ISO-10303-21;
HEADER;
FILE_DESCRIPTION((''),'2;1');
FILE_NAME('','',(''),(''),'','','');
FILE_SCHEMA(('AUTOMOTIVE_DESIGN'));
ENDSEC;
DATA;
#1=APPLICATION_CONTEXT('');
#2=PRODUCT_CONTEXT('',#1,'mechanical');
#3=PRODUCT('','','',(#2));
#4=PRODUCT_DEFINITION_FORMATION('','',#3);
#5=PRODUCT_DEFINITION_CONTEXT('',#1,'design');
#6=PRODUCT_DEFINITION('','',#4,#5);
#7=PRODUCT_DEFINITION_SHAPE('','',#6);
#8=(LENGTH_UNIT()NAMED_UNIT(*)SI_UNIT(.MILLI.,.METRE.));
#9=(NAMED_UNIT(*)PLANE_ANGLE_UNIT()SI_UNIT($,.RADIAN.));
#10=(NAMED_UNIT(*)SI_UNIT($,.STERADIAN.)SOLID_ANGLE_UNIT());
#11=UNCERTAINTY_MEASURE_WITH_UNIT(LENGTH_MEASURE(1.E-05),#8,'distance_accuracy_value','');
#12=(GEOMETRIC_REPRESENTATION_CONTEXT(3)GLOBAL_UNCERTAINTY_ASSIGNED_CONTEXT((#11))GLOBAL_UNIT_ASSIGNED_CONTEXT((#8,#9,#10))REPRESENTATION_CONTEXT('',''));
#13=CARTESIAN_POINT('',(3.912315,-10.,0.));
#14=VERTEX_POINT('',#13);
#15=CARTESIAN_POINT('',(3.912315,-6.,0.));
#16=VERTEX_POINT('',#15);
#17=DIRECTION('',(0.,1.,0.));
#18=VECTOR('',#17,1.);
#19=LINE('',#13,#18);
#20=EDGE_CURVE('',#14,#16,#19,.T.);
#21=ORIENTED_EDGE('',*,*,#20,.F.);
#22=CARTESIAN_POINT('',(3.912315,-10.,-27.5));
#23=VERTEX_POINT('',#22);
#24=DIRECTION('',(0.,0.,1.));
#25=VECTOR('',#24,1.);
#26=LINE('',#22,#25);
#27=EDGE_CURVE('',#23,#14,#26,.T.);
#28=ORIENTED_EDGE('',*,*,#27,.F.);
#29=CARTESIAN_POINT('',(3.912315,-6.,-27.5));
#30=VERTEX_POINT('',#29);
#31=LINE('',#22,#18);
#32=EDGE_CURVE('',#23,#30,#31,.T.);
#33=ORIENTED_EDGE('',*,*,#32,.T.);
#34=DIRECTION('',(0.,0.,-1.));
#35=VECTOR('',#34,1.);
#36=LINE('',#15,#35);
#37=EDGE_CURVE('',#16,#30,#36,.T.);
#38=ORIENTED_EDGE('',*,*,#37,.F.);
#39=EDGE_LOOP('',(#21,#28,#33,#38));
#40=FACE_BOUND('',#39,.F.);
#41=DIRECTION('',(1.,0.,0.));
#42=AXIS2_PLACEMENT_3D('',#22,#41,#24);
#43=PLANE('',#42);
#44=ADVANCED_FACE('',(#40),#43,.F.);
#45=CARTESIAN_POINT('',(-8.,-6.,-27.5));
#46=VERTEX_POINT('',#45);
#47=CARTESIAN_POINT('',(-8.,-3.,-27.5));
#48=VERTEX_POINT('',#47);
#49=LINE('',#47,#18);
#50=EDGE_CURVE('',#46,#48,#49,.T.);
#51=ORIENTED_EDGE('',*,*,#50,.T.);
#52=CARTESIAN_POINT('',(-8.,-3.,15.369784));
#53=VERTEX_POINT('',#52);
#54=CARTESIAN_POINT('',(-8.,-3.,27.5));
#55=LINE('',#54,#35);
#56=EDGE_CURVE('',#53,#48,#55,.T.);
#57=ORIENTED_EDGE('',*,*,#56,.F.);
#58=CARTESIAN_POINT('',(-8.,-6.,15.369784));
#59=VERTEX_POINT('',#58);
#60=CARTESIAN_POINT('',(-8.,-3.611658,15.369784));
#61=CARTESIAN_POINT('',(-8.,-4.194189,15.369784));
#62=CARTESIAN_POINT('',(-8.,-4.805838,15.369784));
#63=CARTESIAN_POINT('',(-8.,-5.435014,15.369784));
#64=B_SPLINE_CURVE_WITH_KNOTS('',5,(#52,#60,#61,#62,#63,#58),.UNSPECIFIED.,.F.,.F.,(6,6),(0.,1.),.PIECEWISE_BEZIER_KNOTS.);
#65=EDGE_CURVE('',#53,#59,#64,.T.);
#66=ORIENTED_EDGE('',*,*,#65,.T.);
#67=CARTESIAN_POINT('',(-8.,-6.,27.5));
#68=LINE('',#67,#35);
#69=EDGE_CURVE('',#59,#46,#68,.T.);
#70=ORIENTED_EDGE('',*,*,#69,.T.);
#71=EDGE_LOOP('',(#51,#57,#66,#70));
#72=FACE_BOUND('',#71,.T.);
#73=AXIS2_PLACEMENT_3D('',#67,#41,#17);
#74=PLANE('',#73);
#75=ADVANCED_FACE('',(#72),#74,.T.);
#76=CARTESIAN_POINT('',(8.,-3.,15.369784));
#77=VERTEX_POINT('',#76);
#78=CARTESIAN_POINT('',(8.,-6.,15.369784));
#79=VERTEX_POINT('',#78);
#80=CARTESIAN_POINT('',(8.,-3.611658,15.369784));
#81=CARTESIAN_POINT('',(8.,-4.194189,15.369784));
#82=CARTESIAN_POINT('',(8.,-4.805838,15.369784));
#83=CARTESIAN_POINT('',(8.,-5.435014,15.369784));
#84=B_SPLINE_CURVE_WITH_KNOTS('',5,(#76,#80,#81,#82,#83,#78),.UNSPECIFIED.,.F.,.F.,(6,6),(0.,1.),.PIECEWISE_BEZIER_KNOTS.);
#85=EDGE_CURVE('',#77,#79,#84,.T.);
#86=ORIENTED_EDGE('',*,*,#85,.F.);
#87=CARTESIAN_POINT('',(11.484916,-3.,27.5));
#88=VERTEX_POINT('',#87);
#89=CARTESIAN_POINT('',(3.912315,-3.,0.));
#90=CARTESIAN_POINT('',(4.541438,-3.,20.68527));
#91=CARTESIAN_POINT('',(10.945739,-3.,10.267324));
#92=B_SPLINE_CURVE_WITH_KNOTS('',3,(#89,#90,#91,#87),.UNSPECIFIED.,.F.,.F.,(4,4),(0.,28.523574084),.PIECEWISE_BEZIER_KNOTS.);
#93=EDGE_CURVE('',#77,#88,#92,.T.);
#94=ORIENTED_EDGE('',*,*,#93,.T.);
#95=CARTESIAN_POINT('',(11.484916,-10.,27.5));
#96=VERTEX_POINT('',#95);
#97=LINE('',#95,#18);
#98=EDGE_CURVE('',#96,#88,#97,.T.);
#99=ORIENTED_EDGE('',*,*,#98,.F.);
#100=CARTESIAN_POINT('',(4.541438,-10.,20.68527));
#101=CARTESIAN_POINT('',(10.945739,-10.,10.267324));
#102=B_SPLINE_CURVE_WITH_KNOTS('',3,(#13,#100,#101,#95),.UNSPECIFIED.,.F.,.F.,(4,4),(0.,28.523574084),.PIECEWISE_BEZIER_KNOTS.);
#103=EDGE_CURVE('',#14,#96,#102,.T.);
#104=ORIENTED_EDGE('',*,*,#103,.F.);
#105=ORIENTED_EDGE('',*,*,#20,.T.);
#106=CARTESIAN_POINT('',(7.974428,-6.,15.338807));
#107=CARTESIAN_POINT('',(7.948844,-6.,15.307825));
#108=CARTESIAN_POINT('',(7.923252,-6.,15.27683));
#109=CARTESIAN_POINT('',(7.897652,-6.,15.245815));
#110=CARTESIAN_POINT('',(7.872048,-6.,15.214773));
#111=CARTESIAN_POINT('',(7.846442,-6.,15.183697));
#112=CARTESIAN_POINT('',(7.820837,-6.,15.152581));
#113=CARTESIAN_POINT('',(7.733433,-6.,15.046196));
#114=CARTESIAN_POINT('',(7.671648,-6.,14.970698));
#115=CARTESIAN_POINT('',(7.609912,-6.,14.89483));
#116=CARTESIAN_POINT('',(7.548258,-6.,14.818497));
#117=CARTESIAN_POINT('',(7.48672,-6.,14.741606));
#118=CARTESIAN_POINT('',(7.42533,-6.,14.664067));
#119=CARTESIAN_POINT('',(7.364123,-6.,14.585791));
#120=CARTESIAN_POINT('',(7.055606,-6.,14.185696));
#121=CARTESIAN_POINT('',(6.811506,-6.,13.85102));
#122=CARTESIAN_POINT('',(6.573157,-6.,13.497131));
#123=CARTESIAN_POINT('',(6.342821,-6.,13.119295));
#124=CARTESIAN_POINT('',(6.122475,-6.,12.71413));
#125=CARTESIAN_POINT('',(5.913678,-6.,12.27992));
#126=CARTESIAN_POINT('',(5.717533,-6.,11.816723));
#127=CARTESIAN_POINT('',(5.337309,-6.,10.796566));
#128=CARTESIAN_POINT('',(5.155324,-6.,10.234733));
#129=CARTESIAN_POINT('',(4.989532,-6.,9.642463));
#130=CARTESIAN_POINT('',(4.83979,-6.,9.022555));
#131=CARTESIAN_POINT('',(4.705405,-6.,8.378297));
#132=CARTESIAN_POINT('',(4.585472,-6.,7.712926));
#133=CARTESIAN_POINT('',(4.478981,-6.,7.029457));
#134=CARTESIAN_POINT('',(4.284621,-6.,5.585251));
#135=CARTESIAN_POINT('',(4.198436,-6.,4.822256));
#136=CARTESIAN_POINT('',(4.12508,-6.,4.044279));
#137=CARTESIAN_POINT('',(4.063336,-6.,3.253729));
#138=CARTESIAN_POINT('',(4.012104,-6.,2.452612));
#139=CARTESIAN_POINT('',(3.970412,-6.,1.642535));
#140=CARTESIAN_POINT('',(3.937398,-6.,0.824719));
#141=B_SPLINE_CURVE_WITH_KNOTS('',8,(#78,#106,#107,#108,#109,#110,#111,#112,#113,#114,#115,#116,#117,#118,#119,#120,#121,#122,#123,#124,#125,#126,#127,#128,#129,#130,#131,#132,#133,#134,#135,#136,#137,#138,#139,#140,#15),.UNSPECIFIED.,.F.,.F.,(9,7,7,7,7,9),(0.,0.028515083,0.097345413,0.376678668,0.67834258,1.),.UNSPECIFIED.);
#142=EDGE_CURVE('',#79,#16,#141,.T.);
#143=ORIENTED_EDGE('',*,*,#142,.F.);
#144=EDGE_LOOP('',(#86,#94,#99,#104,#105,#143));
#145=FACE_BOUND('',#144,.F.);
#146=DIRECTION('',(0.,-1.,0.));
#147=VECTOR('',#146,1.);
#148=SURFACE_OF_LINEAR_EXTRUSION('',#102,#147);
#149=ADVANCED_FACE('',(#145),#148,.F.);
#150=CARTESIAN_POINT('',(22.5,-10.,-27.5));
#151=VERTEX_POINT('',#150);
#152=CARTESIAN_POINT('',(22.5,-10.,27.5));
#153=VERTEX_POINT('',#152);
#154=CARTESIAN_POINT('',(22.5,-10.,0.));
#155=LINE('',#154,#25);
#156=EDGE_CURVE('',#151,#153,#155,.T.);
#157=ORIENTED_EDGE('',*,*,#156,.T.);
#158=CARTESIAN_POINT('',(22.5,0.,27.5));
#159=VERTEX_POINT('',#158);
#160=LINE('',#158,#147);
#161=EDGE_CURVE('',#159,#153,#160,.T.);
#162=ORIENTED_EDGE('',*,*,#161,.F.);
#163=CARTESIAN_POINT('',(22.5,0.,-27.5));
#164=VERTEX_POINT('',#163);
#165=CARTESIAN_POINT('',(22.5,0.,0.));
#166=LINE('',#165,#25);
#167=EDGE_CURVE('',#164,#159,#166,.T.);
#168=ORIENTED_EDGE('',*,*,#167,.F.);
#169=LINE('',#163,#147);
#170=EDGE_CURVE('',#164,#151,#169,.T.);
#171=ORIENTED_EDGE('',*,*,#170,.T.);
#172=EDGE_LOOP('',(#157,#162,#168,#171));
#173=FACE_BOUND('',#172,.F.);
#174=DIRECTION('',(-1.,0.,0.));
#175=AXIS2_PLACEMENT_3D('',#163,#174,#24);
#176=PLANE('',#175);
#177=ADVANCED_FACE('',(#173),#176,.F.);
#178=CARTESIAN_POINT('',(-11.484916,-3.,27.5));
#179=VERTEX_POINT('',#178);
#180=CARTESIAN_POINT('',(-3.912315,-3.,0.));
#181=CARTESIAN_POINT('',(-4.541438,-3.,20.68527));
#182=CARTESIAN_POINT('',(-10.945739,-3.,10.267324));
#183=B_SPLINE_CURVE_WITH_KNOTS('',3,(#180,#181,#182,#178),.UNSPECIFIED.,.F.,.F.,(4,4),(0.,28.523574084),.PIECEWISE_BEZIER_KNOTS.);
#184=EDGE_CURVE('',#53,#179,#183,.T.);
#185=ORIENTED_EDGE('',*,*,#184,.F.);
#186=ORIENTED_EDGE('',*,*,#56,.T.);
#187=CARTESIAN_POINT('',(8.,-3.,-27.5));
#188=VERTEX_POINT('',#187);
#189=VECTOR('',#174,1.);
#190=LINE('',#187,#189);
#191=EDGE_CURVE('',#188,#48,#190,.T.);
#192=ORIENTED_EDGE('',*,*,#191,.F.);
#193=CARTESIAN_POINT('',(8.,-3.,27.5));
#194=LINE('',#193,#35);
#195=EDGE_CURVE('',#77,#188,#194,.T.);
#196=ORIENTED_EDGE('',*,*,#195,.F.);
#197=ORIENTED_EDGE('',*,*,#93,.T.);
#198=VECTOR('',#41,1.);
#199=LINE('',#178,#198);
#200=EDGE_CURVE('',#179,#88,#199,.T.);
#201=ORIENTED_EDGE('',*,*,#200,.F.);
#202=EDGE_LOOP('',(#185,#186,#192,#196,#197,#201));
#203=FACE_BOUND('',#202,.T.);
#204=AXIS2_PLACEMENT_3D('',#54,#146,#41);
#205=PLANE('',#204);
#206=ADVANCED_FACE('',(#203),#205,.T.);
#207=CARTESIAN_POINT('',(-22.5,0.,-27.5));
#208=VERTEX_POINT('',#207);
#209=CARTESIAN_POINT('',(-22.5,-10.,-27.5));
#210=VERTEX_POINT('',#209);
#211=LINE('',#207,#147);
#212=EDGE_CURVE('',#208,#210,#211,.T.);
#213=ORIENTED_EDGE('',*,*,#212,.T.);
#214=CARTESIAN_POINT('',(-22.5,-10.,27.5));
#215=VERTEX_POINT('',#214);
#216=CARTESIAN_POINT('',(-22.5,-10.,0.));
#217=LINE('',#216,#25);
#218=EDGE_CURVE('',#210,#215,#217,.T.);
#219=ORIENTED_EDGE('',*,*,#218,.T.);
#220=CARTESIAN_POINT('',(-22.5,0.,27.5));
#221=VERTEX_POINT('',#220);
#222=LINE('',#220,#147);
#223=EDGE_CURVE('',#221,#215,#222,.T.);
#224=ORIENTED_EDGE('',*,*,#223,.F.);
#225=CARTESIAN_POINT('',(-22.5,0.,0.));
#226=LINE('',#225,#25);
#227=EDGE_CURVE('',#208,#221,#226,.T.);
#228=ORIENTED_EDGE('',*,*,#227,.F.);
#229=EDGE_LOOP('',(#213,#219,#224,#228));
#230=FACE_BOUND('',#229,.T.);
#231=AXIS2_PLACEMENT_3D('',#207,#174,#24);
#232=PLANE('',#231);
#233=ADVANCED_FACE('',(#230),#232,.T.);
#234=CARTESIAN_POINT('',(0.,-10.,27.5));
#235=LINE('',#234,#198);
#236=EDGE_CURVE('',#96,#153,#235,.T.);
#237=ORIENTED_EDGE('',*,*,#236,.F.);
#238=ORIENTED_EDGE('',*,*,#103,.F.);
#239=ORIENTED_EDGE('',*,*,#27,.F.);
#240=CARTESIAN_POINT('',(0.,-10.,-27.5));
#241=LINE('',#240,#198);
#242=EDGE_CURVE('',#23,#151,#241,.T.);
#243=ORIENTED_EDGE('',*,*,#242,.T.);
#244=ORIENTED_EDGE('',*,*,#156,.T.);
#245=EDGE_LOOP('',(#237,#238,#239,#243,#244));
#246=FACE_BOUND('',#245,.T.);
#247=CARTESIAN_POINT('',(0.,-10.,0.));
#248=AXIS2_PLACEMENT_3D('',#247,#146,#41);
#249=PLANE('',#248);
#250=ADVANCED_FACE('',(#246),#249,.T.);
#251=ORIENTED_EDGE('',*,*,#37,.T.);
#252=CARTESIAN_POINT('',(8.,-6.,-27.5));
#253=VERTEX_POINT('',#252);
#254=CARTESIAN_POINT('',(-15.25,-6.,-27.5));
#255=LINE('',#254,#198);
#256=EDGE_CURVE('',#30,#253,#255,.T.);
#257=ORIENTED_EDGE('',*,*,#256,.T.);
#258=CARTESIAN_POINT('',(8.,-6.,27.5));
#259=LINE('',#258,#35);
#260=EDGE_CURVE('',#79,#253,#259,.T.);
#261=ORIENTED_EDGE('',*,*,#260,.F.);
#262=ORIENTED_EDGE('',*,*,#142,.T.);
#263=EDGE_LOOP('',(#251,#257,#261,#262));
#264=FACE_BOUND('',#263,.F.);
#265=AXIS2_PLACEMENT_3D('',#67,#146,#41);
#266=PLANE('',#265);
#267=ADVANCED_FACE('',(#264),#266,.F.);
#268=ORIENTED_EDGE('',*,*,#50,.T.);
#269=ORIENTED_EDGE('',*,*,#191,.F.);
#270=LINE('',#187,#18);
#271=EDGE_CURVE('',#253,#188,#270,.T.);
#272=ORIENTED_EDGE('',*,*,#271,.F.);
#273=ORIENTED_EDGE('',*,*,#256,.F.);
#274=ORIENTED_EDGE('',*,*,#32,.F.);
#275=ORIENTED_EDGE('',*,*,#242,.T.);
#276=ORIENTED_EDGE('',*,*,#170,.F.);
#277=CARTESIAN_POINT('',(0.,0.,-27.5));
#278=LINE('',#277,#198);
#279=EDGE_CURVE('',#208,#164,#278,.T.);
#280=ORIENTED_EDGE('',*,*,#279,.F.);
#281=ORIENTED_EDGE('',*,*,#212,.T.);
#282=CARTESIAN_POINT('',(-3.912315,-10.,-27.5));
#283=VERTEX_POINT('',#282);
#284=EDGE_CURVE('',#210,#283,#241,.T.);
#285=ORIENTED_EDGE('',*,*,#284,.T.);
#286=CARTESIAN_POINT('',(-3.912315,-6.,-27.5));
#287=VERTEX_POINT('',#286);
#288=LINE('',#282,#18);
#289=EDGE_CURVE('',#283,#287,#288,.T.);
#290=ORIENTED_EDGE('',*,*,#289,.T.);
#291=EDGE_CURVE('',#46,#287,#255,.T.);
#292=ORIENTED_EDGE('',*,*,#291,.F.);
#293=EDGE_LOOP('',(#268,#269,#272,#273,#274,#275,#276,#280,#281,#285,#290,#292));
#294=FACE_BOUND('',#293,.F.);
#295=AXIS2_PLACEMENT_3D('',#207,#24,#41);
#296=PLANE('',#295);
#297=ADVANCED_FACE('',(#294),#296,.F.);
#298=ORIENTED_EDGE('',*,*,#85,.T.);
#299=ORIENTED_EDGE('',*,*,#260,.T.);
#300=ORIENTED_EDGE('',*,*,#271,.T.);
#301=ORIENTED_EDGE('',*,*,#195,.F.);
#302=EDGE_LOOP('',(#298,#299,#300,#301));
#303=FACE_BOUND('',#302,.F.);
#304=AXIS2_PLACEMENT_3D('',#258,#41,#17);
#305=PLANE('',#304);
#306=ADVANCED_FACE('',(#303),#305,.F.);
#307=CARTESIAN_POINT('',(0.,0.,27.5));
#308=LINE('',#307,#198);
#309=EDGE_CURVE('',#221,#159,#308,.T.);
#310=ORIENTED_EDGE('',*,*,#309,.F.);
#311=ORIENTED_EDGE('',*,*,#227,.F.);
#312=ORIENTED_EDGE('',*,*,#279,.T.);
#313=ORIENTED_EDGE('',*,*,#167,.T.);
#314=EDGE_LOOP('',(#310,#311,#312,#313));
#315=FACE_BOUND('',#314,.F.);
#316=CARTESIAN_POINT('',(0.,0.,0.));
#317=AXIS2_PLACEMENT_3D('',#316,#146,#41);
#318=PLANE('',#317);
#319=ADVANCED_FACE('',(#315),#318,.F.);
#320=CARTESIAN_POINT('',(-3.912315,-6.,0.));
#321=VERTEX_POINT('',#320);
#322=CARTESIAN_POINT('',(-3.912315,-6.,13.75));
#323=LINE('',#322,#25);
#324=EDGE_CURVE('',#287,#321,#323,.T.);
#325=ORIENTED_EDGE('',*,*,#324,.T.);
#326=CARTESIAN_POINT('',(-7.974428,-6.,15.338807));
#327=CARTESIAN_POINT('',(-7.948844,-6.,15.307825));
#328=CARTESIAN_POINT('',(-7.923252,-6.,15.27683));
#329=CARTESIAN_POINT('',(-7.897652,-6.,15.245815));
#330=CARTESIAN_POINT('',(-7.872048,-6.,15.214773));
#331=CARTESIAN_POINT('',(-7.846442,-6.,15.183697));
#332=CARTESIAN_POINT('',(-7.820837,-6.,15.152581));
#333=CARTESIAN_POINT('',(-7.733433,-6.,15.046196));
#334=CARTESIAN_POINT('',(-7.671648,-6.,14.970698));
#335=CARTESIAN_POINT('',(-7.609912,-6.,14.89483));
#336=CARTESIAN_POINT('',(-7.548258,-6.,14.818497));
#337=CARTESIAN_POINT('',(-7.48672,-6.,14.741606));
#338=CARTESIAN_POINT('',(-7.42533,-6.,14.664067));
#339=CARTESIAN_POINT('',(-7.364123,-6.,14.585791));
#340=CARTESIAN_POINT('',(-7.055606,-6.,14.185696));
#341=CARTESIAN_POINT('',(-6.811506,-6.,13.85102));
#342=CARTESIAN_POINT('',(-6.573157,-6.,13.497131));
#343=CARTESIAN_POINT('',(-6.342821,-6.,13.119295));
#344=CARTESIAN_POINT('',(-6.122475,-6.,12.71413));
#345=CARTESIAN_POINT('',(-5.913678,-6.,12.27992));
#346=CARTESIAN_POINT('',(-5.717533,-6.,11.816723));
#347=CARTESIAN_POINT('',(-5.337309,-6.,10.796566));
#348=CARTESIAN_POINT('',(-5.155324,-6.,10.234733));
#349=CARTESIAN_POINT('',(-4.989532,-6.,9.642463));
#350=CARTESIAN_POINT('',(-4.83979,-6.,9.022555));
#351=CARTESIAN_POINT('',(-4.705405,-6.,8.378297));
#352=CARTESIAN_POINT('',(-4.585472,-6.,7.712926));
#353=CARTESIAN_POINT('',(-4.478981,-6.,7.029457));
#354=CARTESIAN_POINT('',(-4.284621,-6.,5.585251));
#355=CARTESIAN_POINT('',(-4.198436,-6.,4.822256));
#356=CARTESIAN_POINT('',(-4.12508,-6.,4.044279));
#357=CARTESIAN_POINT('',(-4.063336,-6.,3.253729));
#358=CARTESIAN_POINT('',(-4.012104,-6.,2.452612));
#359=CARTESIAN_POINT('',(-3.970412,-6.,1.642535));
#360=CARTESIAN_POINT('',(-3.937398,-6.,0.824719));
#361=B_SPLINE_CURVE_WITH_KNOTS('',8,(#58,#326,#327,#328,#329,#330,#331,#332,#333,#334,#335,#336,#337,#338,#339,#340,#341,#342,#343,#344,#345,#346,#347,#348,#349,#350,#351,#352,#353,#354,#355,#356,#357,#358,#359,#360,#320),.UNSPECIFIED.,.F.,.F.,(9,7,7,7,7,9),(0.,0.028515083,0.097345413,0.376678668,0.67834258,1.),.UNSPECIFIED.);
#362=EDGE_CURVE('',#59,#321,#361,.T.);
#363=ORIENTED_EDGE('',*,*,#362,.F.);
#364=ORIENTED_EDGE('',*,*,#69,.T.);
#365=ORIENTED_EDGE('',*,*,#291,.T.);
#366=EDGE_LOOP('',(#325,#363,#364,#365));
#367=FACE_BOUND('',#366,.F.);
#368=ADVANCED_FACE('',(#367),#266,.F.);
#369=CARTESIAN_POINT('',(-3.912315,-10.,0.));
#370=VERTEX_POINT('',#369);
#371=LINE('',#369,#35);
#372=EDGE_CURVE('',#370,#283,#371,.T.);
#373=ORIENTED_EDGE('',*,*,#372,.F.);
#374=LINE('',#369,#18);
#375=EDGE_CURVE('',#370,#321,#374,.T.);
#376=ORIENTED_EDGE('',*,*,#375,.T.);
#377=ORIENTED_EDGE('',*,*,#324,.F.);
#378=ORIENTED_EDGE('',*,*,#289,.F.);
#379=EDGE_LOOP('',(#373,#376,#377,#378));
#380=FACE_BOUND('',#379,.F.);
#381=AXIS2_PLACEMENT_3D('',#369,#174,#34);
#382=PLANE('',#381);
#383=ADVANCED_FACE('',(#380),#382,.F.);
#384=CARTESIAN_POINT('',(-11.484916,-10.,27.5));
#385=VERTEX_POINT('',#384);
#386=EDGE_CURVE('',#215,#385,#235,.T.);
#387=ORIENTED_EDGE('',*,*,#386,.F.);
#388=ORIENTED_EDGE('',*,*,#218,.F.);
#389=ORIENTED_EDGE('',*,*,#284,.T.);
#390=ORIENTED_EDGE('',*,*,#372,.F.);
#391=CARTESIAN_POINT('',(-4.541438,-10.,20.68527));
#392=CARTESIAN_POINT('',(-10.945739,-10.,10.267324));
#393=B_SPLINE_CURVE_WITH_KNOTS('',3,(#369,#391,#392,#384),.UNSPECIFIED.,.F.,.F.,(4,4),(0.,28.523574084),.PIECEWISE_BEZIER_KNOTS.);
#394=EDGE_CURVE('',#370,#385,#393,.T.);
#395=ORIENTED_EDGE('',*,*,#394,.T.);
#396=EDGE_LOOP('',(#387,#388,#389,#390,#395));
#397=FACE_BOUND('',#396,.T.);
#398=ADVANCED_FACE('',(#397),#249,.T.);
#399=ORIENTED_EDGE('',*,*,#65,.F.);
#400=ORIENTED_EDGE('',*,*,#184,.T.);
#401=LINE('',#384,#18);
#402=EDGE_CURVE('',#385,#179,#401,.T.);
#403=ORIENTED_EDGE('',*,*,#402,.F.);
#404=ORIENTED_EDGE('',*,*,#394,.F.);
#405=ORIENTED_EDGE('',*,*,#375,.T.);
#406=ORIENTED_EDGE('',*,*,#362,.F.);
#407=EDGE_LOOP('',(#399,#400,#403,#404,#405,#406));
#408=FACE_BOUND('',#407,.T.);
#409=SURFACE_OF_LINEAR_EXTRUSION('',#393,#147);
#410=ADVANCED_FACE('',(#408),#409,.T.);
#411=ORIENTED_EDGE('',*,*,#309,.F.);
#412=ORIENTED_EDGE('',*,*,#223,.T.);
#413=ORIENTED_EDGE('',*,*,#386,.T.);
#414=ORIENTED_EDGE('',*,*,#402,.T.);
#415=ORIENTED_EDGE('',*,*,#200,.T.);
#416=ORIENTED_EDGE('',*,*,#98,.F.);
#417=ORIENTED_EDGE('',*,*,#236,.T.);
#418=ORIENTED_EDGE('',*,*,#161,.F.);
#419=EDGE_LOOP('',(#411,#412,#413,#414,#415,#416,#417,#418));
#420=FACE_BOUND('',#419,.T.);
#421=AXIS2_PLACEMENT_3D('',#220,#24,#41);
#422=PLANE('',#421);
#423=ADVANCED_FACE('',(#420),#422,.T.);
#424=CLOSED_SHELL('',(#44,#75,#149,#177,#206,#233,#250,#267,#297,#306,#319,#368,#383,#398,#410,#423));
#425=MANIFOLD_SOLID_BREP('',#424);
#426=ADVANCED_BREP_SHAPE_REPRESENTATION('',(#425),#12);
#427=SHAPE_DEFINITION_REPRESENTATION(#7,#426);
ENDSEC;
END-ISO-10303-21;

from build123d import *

# Parameters (mm, degrees)
F0_W     = 45
F0_H     = 55
F1_DEPTH = 10
F3_DEPTH = 7
F4_W     = 16
F4_H     = 3
F5_DEPTH = 55.0010001


with BuildPart() as f1:
    # F0 (on Front) → F1 (new body)
    with BuildSketch(Plane.XZ):
        Rectangle(F0_W, F0_H)
    extrude(amount=F1_DEPTH)

    # F2 (on face) → F3 (cut)
    with BuildSketch(Plane.XZ.offset(10)):
        with BuildLine():
            Line((3.9123152383, -27.5), (3.9123152383, 0))
            add(Edge.make_bspline(
                [(3.9123152383, 0), (4.5414378197, 20.6852698078), (10.9457386037, 10.2673236529), (11.484915749, 27.5)],
                knots=[0, 0, 0, 0, 28.5235740835, 28.5235740835, 28.5235740835, 28.5235740835], degree=3))
            Line((11.484915749, 27.5), (-11.484915749, 27.5))
            add(Edge.make_bspline(
                [(-3.9123152383, 0), (-4.5414378197, 20.6852698078), (-10.9457386037, 10.2673236529), (-11.484915749, 27.5)],
                knots=[0, 0, 0, 0, 28.5235740835, 28.5235740835, 28.5235740835, 28.5235740835], degree=3))
            Line((-3.9123152383, 0), (-3.9123152383, -27.5))
            Line((-3.9123152383, -27.5), (0, -27.5))
            Line((0, -27.5), (3.9123152383, -27.5))
        make_face()
    extrude(amount=-F3_DEPTH, mode=Mode.SUBTRACT)

    # F4 (on face) → F5 (cut, through all)
    with BuildSketch(Plane.XY.offset(27.5)):
        with Locations((0, -4.5)):
            Rectangle(F4_W, F4_H)
    extrude(amount=-F5_DEPTH, mode=Mode.SUBTRACT)


solid = f1.part
